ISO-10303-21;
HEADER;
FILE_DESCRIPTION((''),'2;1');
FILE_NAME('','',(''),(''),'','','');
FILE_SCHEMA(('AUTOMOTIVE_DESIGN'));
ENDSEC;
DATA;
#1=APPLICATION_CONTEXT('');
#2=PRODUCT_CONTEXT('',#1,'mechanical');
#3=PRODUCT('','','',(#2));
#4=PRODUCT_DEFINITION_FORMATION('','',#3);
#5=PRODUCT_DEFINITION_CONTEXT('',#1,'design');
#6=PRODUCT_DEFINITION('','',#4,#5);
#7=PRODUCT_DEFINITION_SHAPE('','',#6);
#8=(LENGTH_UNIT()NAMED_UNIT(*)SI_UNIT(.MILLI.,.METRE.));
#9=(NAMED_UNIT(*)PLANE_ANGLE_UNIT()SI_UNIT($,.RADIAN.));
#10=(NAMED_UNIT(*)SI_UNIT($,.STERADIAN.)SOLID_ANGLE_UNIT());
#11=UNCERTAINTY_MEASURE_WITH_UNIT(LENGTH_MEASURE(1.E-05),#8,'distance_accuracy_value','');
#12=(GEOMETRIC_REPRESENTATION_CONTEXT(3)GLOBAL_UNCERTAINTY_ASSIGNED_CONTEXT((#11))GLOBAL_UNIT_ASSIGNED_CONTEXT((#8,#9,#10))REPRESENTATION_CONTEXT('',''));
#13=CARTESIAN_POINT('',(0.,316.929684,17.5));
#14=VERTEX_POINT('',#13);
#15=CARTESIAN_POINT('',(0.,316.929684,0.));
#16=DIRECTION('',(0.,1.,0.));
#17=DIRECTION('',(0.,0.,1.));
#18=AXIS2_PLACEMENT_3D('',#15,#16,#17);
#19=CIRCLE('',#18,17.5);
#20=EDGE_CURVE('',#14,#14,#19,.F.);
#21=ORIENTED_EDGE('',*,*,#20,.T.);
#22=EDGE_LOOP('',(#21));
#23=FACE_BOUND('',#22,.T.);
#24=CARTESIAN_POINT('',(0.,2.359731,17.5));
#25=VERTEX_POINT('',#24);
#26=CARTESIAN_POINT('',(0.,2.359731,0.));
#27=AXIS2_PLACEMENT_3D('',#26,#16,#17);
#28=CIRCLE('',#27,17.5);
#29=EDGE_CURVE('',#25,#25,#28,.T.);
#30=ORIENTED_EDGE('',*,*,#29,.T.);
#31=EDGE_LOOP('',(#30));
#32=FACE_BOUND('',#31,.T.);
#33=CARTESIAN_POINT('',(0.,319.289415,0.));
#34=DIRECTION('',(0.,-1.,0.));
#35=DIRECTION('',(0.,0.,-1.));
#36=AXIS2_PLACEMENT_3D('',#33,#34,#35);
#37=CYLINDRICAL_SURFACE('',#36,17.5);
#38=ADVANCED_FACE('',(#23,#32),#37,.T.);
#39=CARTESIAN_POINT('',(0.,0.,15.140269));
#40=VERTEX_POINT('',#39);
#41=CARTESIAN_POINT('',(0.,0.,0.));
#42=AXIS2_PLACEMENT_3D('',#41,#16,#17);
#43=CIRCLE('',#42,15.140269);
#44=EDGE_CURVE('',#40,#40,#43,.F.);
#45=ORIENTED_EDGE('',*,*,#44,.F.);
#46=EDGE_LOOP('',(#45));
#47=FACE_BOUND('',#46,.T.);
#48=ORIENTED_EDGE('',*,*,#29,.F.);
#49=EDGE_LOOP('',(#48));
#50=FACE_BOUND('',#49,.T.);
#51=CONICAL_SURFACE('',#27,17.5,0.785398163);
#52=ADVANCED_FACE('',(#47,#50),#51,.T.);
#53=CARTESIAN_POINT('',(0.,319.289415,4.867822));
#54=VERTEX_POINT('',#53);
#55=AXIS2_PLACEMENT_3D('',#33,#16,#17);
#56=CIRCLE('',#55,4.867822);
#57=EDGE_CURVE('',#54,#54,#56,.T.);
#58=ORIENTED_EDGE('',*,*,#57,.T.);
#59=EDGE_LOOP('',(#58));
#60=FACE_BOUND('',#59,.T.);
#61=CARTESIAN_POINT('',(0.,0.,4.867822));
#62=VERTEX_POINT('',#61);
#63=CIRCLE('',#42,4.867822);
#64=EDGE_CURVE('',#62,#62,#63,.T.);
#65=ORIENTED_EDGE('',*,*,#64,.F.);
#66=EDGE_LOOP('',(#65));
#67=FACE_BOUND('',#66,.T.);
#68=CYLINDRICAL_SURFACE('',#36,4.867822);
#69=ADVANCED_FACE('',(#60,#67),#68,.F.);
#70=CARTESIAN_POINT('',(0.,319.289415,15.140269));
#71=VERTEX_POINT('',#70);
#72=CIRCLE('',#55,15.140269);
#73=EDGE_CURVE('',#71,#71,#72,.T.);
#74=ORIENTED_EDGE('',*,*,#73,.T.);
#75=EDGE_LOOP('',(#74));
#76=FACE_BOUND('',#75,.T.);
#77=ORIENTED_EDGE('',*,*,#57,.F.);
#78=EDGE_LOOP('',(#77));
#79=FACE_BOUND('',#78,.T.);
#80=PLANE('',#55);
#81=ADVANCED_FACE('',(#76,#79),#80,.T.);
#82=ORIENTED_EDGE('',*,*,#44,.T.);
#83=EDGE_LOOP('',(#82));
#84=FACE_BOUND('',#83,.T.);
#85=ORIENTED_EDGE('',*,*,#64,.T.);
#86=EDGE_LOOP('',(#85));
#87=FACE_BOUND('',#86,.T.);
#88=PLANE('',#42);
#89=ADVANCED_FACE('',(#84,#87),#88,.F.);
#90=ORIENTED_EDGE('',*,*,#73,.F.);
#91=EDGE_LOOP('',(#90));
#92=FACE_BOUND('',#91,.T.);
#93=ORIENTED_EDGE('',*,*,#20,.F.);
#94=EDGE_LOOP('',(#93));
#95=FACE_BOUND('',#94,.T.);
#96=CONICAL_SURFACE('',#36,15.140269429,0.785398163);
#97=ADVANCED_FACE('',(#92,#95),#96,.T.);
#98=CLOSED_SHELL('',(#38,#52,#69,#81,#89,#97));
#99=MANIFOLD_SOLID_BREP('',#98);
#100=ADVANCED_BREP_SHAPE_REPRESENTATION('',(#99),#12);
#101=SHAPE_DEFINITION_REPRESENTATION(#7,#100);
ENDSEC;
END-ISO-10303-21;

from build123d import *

# Parameters (mm, degrees)
SKETCH1_R           = 17.5
BOSS_EXTRUDE1_DEPTH = 319.289414756
SKETCH2_R           = 4.867822203
CUT_EXTRUDE1_DEPTH  = 321.247139527
CHAMFER1_SIZE       = 2.359730571


with BuildPart() as part:
    # Sketch1 → Boss-Extrude1 (new body)
    with BuildSketch(Plane(origin=(0, 0, 0), x_dir=(1, 0, 0), z_dir=(0, 1, 0))):
        Circle(SKETCH1_R)
    extrude(amount=BOSS_EXTRUDE1_DEPTH)

    # Sketch2 → Cut-Extrude1 (cut, through all)
    with BuildSketch(Plane(origin=(0, 0, 0), x_dir=(1, 0, 0), z_dir=(0, 1, 0))):
        Circle(SKETCH2_R)
    extrude(amount=CUT_EXTRUDE1_DEPTH, mode=Mode.SUBTRACT)

    # Chamfer1
    chamfer1_edges = [part.edges().sort_by_distance(p)[0] for p in [
        (-17.5, 319.289414756, 0),
        (-17.5, 0, 0),
    ]]
    chamfer(chamfer1_edges, length=CHAMFER1_SIZE)


solid = part.part
